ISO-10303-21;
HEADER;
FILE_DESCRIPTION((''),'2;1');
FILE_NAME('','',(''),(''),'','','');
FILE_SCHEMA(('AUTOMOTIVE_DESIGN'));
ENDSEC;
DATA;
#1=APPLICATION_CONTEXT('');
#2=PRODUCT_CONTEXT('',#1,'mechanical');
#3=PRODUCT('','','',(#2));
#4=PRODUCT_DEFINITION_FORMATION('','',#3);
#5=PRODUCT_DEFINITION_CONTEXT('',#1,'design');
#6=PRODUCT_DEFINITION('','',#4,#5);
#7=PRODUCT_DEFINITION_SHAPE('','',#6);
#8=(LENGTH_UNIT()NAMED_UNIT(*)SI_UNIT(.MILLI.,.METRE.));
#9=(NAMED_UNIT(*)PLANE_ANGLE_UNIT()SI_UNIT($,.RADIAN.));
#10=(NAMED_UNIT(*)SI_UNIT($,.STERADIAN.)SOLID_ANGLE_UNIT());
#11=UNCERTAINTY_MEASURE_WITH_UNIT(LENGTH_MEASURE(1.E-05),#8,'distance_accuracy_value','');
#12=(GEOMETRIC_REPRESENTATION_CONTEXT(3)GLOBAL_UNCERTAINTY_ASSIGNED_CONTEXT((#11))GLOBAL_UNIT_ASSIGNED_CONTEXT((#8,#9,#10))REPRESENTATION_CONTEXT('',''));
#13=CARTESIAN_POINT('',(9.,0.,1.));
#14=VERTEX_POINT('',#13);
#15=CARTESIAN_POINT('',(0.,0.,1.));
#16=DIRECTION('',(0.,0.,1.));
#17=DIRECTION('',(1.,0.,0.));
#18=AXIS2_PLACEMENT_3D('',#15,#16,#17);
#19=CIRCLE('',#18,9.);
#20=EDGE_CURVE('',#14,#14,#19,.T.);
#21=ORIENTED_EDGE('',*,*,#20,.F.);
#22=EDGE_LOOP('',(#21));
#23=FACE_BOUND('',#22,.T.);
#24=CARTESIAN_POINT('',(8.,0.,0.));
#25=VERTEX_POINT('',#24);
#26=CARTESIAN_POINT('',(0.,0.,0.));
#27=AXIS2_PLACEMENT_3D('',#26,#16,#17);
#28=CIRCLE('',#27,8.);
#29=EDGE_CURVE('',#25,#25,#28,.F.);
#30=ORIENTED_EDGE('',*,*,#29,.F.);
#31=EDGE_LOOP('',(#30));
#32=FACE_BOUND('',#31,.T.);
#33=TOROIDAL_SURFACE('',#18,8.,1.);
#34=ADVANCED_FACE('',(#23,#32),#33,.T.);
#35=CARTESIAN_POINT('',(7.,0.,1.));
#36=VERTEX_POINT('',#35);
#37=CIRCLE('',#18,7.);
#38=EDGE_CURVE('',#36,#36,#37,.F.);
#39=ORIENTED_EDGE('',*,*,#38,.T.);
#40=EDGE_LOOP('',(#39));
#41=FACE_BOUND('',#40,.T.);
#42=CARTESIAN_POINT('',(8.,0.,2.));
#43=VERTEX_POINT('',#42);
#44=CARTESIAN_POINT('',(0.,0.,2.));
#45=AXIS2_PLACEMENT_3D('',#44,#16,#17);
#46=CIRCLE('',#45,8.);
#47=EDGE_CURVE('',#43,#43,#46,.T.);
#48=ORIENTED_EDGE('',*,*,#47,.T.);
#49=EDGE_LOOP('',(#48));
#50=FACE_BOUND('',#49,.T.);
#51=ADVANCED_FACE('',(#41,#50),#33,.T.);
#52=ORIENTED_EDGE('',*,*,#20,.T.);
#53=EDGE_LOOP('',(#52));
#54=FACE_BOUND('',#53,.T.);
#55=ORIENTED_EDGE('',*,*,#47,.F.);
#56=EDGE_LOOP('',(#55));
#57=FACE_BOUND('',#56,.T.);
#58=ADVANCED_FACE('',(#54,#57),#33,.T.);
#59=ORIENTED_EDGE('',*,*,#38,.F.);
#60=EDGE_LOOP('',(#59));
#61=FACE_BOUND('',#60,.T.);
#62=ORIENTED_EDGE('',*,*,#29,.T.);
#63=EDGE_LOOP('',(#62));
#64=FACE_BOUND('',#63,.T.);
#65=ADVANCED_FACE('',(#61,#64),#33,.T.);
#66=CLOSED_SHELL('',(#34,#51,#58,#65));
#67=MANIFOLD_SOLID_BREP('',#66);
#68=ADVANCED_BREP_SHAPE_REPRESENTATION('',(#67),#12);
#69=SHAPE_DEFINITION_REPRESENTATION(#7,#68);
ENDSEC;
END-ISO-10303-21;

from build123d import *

# Parameters (mm, degrees)
SKETCH1_R           = 9
BOSS_EXTRUDE1_DEPTH = 2
SKETCH2_R           = 7
CUT_EXTRUDE1_DEPTH  = 2
FILLET1_R           = 1


with BuildPart() as part:
    # Sketch1 → Boss-Extrude1 (new body)
    with BuildSketch(Plane.XY):
        Circle(SKETCH1_R)
    extrude(amount=BOSS_EXTRUDE1_DEPTH)

    # Sketch2 → Cut-Extrude1 (cut)
    with BuildSketch(Plane.XY.offset(2)):
        Circle(SKETCH2_R)
    extrude(amount=-CUT_EXTRUDE1_DEPTH, mode=Mode.SUBTRACT)

    # Fillet1
    fillet1_edges = [part.edges().sort_by_distance(p)[0] for p in [
        (-9, 0, 0),
        (-9, 0, 2),
        (-7, 0, 0),
        (-7, 0, 2),
    ]]
    fillet(fillet1_edges, radius=FILLET1_R - 0.0001)  # a hair under: the kernel refuses the full size


solid = part.part
